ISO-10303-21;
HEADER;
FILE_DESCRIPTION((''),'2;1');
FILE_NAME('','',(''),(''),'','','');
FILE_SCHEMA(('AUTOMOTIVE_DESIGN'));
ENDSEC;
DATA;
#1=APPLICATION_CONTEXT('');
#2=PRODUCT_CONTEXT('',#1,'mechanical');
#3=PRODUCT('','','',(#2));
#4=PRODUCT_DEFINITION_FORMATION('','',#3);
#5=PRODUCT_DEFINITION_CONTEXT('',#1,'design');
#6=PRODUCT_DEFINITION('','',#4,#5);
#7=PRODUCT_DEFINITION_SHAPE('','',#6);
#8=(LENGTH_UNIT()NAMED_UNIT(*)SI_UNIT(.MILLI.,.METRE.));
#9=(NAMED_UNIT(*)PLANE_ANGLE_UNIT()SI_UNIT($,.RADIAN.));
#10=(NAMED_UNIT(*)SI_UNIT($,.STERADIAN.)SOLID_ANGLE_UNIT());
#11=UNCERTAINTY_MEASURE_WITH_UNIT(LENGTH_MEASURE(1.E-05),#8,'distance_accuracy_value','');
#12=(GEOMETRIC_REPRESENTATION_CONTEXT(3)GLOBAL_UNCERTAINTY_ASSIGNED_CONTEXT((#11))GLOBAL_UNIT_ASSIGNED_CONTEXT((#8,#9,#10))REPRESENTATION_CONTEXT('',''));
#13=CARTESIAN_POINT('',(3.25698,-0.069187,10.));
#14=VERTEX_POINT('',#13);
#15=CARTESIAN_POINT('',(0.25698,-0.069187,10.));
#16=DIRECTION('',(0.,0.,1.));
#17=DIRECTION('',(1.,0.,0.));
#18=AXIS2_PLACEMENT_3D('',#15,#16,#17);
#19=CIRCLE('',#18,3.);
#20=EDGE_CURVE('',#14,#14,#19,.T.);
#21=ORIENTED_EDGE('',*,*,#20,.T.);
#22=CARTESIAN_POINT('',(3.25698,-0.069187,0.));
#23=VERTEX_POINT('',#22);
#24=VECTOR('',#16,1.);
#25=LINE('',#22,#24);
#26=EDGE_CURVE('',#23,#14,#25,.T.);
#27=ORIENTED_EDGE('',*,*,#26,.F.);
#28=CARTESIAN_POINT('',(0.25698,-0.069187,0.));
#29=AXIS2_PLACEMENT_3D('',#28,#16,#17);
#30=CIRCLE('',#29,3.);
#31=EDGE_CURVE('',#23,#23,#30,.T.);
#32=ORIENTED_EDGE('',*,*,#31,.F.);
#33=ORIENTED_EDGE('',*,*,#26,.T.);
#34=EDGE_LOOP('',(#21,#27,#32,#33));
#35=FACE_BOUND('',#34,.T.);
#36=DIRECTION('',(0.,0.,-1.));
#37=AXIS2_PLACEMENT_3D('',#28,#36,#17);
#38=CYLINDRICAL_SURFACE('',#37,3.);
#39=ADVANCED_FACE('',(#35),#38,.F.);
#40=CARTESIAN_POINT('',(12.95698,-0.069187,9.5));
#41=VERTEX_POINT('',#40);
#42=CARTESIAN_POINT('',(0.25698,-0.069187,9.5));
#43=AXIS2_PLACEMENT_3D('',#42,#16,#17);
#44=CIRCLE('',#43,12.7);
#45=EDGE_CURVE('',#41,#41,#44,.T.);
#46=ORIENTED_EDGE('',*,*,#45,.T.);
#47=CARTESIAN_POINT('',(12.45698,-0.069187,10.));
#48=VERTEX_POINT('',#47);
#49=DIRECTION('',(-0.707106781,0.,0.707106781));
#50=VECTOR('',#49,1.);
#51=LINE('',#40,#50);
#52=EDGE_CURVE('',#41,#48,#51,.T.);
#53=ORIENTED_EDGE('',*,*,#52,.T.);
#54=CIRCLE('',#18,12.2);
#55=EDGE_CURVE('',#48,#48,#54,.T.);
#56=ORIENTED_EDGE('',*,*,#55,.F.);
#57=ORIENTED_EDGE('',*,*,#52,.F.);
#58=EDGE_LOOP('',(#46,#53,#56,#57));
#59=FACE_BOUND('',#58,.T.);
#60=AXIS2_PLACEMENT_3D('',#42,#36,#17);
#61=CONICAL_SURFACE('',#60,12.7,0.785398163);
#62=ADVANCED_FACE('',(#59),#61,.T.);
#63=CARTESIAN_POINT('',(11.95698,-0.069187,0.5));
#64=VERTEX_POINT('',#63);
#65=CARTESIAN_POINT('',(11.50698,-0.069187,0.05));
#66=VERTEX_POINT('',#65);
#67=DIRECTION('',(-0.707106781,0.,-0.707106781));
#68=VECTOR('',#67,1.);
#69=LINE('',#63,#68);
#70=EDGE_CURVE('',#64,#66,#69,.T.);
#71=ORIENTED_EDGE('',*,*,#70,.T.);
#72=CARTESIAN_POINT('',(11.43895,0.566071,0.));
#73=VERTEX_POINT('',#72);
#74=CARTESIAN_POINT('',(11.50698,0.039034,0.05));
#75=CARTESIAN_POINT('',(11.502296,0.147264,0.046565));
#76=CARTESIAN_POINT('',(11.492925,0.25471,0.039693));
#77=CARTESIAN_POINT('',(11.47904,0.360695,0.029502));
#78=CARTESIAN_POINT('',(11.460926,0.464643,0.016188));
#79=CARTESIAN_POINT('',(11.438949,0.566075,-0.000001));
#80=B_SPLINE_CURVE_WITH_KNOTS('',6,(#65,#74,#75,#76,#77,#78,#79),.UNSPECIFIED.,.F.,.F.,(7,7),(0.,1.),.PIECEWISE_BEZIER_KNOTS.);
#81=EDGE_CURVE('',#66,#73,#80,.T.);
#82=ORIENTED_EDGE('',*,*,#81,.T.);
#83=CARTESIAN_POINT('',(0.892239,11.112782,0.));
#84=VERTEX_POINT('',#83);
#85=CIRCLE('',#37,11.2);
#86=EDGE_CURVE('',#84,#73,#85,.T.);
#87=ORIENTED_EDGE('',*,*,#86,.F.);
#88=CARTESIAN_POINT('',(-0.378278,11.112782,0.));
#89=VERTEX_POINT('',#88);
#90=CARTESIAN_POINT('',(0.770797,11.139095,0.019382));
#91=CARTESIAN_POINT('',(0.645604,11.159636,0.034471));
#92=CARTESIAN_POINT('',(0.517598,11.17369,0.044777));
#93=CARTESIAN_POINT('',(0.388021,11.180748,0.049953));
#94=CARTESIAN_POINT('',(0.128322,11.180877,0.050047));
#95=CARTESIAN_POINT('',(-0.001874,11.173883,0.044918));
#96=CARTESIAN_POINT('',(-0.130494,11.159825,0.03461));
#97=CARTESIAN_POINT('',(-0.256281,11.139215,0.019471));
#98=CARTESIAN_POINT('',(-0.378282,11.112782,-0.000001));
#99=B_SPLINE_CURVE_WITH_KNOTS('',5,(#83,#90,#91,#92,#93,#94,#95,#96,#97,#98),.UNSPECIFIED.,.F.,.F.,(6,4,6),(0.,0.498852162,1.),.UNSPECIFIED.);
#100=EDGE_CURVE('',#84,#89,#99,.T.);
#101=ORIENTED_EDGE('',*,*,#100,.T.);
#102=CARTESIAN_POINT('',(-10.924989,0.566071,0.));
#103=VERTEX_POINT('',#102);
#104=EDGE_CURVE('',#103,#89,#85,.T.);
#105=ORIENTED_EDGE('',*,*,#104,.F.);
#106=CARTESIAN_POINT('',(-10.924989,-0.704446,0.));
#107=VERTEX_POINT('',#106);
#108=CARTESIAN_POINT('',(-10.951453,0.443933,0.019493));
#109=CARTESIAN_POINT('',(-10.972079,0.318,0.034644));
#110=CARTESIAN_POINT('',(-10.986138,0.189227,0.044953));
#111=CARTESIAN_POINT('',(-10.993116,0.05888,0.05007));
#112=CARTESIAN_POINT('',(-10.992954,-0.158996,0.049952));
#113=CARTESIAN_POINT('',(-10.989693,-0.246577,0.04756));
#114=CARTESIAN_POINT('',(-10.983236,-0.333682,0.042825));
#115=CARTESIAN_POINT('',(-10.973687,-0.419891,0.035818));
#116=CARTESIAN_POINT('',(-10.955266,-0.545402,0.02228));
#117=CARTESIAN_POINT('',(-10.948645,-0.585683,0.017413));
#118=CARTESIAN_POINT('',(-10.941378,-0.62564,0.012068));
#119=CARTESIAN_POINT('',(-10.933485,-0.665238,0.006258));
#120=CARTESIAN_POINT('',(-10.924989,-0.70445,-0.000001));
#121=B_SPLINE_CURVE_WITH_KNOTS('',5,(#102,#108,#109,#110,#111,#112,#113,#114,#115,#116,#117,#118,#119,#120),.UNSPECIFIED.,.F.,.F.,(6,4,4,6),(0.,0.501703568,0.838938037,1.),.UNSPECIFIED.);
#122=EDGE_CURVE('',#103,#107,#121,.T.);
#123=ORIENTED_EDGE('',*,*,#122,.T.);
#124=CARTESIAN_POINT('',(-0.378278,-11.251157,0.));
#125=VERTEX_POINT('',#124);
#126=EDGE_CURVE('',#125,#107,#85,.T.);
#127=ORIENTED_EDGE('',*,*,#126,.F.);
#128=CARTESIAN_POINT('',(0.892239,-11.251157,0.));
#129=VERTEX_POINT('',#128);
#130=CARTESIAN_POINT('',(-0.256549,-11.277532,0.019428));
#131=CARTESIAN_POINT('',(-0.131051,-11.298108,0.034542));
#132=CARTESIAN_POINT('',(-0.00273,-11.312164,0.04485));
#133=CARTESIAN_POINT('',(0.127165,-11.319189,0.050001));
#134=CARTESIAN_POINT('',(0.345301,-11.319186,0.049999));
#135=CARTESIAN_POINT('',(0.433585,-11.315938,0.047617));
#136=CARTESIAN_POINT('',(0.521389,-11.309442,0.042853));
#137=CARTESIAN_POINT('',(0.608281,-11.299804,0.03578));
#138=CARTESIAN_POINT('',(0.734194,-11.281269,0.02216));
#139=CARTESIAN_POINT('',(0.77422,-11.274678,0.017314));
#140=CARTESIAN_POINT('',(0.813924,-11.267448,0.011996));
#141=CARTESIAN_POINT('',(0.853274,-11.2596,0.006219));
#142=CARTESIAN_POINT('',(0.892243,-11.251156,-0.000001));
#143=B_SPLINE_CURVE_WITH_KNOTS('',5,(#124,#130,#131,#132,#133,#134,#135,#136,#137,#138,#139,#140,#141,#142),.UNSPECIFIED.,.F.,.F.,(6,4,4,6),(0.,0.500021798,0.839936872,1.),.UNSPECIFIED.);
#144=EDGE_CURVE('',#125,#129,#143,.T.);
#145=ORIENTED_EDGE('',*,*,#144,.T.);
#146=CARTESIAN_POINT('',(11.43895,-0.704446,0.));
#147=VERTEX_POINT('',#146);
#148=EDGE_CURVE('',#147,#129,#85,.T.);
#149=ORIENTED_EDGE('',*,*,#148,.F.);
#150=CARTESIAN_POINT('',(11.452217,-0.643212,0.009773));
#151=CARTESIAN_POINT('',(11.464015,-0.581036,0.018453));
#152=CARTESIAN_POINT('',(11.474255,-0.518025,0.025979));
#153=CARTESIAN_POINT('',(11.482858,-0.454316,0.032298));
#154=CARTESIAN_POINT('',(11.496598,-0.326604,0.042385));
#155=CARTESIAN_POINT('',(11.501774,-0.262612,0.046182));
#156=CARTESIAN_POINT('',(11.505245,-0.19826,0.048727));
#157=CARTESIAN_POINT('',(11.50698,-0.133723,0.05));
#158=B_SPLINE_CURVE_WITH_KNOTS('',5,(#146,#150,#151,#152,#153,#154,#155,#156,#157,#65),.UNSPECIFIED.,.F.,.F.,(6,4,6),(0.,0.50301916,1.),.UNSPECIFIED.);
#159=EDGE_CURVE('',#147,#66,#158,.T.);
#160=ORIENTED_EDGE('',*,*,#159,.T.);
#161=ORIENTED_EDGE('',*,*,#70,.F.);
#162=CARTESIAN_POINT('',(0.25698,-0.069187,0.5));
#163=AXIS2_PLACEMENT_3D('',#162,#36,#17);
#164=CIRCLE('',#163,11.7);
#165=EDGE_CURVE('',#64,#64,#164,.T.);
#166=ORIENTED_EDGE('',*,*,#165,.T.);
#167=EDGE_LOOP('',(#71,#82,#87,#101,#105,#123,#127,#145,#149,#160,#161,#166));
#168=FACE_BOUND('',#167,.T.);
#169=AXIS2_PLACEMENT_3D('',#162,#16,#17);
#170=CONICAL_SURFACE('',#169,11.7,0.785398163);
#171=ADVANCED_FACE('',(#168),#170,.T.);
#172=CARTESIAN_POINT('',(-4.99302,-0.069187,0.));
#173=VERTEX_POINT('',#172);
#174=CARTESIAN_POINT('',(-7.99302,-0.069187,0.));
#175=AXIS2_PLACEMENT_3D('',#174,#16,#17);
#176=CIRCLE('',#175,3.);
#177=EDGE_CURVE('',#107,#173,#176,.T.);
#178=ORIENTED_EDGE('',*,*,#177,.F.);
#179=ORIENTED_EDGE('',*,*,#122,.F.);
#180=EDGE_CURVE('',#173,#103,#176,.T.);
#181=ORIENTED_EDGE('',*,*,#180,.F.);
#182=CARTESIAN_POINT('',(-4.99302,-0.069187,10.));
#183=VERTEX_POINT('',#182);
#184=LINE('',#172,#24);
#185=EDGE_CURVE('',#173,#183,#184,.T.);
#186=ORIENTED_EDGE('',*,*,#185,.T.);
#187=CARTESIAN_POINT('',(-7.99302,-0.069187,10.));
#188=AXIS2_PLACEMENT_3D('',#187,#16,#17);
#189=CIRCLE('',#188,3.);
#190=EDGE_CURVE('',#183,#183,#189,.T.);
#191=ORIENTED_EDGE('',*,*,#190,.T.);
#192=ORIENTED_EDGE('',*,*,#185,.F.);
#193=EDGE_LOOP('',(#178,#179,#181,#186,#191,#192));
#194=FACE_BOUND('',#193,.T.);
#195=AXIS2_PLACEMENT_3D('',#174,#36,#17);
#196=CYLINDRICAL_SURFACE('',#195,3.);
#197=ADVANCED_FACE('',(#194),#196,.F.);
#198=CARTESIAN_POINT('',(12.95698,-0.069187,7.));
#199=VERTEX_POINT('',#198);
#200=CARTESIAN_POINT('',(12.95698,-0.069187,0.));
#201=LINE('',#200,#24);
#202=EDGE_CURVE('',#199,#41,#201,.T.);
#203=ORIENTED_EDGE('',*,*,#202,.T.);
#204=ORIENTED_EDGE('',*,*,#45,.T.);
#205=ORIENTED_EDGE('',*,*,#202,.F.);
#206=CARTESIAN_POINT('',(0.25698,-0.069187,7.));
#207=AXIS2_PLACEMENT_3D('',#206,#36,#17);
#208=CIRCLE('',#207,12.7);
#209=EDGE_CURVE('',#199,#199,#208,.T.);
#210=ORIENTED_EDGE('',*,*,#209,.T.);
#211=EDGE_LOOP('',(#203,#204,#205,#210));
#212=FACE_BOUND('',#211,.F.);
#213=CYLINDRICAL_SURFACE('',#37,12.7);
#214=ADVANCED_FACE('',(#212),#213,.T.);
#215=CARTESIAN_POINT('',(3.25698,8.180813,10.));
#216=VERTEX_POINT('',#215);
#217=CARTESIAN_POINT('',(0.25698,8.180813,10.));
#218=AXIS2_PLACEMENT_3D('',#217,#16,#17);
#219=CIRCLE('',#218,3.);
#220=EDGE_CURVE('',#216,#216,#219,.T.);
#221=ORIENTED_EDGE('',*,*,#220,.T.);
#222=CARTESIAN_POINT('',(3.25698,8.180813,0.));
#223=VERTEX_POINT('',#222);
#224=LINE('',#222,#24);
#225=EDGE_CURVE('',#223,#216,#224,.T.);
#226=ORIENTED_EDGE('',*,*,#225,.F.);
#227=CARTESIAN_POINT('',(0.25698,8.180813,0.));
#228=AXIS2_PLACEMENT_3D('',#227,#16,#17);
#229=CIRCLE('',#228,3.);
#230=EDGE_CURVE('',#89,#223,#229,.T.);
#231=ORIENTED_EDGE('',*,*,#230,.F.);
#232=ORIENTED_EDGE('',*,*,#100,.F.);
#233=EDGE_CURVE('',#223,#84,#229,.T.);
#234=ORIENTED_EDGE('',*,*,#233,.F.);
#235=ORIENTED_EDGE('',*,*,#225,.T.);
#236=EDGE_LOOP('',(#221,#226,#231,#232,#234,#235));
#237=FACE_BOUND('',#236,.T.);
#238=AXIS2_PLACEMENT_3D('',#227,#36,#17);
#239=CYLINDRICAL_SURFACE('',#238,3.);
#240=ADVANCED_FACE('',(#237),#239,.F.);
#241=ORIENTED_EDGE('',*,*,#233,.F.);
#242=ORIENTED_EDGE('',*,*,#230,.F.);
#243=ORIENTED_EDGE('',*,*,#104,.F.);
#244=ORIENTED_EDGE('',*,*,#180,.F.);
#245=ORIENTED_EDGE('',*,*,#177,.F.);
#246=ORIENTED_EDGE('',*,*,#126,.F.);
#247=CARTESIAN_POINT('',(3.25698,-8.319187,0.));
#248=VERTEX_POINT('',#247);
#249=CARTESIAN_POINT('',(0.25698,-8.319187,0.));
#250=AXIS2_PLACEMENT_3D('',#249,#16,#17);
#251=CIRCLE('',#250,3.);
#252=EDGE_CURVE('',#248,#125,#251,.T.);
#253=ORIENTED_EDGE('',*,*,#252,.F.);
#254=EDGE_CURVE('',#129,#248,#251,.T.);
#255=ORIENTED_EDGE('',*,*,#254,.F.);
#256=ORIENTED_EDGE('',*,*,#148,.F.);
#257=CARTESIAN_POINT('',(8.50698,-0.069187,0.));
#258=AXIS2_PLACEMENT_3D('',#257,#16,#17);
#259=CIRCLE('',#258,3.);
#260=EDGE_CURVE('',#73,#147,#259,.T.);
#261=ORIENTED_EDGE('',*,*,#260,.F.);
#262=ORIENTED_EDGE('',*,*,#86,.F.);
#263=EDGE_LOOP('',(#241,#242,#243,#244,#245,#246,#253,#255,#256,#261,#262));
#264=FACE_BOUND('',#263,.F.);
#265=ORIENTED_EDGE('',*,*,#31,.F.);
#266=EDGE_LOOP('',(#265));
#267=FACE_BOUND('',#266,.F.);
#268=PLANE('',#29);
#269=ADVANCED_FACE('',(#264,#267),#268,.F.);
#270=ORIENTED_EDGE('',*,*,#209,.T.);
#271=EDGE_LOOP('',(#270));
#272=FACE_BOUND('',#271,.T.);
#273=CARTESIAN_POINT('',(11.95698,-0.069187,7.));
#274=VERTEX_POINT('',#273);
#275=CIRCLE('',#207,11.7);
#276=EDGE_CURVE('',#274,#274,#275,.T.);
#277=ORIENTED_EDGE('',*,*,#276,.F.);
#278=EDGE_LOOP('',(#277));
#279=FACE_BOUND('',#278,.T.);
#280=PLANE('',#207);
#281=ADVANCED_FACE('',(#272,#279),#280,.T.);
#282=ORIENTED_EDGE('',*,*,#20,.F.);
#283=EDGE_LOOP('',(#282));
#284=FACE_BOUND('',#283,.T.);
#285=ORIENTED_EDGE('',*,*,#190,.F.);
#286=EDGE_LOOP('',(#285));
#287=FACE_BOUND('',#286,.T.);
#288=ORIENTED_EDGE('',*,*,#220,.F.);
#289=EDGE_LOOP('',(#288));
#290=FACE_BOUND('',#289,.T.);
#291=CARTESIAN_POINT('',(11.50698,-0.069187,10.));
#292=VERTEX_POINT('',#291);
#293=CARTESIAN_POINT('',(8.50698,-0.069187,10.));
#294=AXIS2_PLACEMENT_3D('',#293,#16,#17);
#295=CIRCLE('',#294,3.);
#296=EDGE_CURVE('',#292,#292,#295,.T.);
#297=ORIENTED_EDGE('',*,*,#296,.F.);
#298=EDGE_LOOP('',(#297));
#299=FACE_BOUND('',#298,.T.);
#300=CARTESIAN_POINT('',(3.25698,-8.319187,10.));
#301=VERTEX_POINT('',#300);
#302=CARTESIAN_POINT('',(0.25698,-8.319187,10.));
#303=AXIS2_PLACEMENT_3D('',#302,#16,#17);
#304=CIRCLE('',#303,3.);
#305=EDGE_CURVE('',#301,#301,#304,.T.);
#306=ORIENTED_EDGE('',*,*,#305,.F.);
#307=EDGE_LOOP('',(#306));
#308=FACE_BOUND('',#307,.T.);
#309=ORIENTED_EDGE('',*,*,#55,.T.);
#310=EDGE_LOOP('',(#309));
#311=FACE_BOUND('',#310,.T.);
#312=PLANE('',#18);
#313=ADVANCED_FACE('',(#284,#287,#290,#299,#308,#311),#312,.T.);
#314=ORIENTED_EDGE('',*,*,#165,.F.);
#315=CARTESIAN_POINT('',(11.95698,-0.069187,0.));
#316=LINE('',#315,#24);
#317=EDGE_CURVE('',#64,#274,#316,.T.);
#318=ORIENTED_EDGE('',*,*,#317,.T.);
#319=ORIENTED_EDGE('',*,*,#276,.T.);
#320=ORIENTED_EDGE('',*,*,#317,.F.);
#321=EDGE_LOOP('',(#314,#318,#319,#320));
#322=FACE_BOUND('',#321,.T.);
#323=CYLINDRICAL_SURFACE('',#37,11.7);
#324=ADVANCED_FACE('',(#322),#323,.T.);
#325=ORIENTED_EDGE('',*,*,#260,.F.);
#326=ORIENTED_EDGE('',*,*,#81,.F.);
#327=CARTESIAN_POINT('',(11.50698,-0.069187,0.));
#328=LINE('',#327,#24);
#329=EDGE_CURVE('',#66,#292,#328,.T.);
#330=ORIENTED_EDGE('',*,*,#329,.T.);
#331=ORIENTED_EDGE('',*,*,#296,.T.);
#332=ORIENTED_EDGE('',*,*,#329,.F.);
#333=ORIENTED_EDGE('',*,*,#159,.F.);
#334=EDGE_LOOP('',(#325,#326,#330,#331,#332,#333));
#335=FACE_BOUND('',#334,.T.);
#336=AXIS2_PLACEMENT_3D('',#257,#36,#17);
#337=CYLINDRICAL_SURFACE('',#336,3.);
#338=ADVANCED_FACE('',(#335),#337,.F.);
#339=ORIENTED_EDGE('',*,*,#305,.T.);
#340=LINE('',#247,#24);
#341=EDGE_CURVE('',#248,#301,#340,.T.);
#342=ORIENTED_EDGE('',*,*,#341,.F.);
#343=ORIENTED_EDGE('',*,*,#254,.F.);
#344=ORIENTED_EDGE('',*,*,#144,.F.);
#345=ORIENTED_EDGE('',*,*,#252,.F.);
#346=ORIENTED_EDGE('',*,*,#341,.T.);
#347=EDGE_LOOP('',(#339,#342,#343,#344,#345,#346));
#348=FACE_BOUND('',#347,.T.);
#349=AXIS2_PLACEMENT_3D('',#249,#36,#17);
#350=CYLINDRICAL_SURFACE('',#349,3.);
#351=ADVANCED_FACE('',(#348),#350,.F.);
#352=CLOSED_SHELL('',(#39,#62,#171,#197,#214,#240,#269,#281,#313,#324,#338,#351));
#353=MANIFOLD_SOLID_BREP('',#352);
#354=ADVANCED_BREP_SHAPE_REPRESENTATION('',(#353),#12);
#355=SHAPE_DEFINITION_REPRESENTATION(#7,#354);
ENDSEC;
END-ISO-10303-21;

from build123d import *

# Parameters (mm, degrees)
F0_R     = 12.7
F0_R_2   = 3
F1_DEPTH = 10
F2_R     = 12.7
F2_R_2   = 11.7
F3_DEPTH = 7


# Not quite as in the source:
# - a fillet or chamfer that OpenCascade refuses, or shapes differently, is made with other operations: its cross-section is extruded or revolved along the edge and cut away or added


with BuildPart() as f1:
    # F0 (on Top) → F1 (new body)
    with BuildSketch(Plane.XY):
        with Locations((0.256980346, -0.0691873614)):
            Circle(F0_R)
        with Locations((0.256980346, -8.3191873614)):
            Circle(F0_R_2, mode=Mode.SUBTRACT)
        with Locations((-7.993019654, -0.0691873614)):
            Circle(F0_R_2, mode=Mode.SUBTRACT)
        with Locations((0.256980346, -0.0691873614)):
            Circle(F0_R_2, mode=Mode.SUBTRACT)
        with Locations((8.506980346, -0.0691873614)):
            Circle(F0_R_2, mode=Mode.SUBTRACT)
        with Locations((0.256980346, 8.1808126386)):
            Circle(F0_R_2, mode=Mode.SUBTRACT)
    extrude(amount=F1_DEPTH)

    # F2 (on face) → F3 (cut)
    with BuildSketch(Plane(origin=(0, 0, 0), x_dir=(1, 0, 0), z_dir=(0, 0, -1))):
        with Locations((0.256980346, 0.0691873614)):
            Circle(F2_R)
        with Locations((0.256980346, 0.0691873614)):
            Circle(F2_R_2, mode=Mode.SUBTRACT)
    extrude(amount=-F3_DEPTH, mode=Mode.SUBTRACT)

    # F4: chamfer of 0.5 on 2 edges, made by hand

    # F4_s1 → F4_t2 (revolve, cut)
    with BuildSketch(Plane.XZ.offset(0.0691873614)):
        Polygon((12.956980346, 9.5), (12.456980346, 10), (12.956980346, 10), align=None)
    revolve(axis=Axis((0.256980346, -0.0691873614, 10), (0, 0, 1)), mode=Mode.SUBTRACT)

    # F4_s3 → F4_t4 (revolve, cut)
    with BuildSketch(Plane.XZ.offset(0.0691873614)):
        Polygon((11.956980346, 0.5), (11.456980346, 0), (11.956980346, 0), align=None)
    revolve(axis=Axis((0.256980346, -0.0691873614, 0), (0, 0, -1)), mode=Mode.SUBTRACT)


solid = f1.part
